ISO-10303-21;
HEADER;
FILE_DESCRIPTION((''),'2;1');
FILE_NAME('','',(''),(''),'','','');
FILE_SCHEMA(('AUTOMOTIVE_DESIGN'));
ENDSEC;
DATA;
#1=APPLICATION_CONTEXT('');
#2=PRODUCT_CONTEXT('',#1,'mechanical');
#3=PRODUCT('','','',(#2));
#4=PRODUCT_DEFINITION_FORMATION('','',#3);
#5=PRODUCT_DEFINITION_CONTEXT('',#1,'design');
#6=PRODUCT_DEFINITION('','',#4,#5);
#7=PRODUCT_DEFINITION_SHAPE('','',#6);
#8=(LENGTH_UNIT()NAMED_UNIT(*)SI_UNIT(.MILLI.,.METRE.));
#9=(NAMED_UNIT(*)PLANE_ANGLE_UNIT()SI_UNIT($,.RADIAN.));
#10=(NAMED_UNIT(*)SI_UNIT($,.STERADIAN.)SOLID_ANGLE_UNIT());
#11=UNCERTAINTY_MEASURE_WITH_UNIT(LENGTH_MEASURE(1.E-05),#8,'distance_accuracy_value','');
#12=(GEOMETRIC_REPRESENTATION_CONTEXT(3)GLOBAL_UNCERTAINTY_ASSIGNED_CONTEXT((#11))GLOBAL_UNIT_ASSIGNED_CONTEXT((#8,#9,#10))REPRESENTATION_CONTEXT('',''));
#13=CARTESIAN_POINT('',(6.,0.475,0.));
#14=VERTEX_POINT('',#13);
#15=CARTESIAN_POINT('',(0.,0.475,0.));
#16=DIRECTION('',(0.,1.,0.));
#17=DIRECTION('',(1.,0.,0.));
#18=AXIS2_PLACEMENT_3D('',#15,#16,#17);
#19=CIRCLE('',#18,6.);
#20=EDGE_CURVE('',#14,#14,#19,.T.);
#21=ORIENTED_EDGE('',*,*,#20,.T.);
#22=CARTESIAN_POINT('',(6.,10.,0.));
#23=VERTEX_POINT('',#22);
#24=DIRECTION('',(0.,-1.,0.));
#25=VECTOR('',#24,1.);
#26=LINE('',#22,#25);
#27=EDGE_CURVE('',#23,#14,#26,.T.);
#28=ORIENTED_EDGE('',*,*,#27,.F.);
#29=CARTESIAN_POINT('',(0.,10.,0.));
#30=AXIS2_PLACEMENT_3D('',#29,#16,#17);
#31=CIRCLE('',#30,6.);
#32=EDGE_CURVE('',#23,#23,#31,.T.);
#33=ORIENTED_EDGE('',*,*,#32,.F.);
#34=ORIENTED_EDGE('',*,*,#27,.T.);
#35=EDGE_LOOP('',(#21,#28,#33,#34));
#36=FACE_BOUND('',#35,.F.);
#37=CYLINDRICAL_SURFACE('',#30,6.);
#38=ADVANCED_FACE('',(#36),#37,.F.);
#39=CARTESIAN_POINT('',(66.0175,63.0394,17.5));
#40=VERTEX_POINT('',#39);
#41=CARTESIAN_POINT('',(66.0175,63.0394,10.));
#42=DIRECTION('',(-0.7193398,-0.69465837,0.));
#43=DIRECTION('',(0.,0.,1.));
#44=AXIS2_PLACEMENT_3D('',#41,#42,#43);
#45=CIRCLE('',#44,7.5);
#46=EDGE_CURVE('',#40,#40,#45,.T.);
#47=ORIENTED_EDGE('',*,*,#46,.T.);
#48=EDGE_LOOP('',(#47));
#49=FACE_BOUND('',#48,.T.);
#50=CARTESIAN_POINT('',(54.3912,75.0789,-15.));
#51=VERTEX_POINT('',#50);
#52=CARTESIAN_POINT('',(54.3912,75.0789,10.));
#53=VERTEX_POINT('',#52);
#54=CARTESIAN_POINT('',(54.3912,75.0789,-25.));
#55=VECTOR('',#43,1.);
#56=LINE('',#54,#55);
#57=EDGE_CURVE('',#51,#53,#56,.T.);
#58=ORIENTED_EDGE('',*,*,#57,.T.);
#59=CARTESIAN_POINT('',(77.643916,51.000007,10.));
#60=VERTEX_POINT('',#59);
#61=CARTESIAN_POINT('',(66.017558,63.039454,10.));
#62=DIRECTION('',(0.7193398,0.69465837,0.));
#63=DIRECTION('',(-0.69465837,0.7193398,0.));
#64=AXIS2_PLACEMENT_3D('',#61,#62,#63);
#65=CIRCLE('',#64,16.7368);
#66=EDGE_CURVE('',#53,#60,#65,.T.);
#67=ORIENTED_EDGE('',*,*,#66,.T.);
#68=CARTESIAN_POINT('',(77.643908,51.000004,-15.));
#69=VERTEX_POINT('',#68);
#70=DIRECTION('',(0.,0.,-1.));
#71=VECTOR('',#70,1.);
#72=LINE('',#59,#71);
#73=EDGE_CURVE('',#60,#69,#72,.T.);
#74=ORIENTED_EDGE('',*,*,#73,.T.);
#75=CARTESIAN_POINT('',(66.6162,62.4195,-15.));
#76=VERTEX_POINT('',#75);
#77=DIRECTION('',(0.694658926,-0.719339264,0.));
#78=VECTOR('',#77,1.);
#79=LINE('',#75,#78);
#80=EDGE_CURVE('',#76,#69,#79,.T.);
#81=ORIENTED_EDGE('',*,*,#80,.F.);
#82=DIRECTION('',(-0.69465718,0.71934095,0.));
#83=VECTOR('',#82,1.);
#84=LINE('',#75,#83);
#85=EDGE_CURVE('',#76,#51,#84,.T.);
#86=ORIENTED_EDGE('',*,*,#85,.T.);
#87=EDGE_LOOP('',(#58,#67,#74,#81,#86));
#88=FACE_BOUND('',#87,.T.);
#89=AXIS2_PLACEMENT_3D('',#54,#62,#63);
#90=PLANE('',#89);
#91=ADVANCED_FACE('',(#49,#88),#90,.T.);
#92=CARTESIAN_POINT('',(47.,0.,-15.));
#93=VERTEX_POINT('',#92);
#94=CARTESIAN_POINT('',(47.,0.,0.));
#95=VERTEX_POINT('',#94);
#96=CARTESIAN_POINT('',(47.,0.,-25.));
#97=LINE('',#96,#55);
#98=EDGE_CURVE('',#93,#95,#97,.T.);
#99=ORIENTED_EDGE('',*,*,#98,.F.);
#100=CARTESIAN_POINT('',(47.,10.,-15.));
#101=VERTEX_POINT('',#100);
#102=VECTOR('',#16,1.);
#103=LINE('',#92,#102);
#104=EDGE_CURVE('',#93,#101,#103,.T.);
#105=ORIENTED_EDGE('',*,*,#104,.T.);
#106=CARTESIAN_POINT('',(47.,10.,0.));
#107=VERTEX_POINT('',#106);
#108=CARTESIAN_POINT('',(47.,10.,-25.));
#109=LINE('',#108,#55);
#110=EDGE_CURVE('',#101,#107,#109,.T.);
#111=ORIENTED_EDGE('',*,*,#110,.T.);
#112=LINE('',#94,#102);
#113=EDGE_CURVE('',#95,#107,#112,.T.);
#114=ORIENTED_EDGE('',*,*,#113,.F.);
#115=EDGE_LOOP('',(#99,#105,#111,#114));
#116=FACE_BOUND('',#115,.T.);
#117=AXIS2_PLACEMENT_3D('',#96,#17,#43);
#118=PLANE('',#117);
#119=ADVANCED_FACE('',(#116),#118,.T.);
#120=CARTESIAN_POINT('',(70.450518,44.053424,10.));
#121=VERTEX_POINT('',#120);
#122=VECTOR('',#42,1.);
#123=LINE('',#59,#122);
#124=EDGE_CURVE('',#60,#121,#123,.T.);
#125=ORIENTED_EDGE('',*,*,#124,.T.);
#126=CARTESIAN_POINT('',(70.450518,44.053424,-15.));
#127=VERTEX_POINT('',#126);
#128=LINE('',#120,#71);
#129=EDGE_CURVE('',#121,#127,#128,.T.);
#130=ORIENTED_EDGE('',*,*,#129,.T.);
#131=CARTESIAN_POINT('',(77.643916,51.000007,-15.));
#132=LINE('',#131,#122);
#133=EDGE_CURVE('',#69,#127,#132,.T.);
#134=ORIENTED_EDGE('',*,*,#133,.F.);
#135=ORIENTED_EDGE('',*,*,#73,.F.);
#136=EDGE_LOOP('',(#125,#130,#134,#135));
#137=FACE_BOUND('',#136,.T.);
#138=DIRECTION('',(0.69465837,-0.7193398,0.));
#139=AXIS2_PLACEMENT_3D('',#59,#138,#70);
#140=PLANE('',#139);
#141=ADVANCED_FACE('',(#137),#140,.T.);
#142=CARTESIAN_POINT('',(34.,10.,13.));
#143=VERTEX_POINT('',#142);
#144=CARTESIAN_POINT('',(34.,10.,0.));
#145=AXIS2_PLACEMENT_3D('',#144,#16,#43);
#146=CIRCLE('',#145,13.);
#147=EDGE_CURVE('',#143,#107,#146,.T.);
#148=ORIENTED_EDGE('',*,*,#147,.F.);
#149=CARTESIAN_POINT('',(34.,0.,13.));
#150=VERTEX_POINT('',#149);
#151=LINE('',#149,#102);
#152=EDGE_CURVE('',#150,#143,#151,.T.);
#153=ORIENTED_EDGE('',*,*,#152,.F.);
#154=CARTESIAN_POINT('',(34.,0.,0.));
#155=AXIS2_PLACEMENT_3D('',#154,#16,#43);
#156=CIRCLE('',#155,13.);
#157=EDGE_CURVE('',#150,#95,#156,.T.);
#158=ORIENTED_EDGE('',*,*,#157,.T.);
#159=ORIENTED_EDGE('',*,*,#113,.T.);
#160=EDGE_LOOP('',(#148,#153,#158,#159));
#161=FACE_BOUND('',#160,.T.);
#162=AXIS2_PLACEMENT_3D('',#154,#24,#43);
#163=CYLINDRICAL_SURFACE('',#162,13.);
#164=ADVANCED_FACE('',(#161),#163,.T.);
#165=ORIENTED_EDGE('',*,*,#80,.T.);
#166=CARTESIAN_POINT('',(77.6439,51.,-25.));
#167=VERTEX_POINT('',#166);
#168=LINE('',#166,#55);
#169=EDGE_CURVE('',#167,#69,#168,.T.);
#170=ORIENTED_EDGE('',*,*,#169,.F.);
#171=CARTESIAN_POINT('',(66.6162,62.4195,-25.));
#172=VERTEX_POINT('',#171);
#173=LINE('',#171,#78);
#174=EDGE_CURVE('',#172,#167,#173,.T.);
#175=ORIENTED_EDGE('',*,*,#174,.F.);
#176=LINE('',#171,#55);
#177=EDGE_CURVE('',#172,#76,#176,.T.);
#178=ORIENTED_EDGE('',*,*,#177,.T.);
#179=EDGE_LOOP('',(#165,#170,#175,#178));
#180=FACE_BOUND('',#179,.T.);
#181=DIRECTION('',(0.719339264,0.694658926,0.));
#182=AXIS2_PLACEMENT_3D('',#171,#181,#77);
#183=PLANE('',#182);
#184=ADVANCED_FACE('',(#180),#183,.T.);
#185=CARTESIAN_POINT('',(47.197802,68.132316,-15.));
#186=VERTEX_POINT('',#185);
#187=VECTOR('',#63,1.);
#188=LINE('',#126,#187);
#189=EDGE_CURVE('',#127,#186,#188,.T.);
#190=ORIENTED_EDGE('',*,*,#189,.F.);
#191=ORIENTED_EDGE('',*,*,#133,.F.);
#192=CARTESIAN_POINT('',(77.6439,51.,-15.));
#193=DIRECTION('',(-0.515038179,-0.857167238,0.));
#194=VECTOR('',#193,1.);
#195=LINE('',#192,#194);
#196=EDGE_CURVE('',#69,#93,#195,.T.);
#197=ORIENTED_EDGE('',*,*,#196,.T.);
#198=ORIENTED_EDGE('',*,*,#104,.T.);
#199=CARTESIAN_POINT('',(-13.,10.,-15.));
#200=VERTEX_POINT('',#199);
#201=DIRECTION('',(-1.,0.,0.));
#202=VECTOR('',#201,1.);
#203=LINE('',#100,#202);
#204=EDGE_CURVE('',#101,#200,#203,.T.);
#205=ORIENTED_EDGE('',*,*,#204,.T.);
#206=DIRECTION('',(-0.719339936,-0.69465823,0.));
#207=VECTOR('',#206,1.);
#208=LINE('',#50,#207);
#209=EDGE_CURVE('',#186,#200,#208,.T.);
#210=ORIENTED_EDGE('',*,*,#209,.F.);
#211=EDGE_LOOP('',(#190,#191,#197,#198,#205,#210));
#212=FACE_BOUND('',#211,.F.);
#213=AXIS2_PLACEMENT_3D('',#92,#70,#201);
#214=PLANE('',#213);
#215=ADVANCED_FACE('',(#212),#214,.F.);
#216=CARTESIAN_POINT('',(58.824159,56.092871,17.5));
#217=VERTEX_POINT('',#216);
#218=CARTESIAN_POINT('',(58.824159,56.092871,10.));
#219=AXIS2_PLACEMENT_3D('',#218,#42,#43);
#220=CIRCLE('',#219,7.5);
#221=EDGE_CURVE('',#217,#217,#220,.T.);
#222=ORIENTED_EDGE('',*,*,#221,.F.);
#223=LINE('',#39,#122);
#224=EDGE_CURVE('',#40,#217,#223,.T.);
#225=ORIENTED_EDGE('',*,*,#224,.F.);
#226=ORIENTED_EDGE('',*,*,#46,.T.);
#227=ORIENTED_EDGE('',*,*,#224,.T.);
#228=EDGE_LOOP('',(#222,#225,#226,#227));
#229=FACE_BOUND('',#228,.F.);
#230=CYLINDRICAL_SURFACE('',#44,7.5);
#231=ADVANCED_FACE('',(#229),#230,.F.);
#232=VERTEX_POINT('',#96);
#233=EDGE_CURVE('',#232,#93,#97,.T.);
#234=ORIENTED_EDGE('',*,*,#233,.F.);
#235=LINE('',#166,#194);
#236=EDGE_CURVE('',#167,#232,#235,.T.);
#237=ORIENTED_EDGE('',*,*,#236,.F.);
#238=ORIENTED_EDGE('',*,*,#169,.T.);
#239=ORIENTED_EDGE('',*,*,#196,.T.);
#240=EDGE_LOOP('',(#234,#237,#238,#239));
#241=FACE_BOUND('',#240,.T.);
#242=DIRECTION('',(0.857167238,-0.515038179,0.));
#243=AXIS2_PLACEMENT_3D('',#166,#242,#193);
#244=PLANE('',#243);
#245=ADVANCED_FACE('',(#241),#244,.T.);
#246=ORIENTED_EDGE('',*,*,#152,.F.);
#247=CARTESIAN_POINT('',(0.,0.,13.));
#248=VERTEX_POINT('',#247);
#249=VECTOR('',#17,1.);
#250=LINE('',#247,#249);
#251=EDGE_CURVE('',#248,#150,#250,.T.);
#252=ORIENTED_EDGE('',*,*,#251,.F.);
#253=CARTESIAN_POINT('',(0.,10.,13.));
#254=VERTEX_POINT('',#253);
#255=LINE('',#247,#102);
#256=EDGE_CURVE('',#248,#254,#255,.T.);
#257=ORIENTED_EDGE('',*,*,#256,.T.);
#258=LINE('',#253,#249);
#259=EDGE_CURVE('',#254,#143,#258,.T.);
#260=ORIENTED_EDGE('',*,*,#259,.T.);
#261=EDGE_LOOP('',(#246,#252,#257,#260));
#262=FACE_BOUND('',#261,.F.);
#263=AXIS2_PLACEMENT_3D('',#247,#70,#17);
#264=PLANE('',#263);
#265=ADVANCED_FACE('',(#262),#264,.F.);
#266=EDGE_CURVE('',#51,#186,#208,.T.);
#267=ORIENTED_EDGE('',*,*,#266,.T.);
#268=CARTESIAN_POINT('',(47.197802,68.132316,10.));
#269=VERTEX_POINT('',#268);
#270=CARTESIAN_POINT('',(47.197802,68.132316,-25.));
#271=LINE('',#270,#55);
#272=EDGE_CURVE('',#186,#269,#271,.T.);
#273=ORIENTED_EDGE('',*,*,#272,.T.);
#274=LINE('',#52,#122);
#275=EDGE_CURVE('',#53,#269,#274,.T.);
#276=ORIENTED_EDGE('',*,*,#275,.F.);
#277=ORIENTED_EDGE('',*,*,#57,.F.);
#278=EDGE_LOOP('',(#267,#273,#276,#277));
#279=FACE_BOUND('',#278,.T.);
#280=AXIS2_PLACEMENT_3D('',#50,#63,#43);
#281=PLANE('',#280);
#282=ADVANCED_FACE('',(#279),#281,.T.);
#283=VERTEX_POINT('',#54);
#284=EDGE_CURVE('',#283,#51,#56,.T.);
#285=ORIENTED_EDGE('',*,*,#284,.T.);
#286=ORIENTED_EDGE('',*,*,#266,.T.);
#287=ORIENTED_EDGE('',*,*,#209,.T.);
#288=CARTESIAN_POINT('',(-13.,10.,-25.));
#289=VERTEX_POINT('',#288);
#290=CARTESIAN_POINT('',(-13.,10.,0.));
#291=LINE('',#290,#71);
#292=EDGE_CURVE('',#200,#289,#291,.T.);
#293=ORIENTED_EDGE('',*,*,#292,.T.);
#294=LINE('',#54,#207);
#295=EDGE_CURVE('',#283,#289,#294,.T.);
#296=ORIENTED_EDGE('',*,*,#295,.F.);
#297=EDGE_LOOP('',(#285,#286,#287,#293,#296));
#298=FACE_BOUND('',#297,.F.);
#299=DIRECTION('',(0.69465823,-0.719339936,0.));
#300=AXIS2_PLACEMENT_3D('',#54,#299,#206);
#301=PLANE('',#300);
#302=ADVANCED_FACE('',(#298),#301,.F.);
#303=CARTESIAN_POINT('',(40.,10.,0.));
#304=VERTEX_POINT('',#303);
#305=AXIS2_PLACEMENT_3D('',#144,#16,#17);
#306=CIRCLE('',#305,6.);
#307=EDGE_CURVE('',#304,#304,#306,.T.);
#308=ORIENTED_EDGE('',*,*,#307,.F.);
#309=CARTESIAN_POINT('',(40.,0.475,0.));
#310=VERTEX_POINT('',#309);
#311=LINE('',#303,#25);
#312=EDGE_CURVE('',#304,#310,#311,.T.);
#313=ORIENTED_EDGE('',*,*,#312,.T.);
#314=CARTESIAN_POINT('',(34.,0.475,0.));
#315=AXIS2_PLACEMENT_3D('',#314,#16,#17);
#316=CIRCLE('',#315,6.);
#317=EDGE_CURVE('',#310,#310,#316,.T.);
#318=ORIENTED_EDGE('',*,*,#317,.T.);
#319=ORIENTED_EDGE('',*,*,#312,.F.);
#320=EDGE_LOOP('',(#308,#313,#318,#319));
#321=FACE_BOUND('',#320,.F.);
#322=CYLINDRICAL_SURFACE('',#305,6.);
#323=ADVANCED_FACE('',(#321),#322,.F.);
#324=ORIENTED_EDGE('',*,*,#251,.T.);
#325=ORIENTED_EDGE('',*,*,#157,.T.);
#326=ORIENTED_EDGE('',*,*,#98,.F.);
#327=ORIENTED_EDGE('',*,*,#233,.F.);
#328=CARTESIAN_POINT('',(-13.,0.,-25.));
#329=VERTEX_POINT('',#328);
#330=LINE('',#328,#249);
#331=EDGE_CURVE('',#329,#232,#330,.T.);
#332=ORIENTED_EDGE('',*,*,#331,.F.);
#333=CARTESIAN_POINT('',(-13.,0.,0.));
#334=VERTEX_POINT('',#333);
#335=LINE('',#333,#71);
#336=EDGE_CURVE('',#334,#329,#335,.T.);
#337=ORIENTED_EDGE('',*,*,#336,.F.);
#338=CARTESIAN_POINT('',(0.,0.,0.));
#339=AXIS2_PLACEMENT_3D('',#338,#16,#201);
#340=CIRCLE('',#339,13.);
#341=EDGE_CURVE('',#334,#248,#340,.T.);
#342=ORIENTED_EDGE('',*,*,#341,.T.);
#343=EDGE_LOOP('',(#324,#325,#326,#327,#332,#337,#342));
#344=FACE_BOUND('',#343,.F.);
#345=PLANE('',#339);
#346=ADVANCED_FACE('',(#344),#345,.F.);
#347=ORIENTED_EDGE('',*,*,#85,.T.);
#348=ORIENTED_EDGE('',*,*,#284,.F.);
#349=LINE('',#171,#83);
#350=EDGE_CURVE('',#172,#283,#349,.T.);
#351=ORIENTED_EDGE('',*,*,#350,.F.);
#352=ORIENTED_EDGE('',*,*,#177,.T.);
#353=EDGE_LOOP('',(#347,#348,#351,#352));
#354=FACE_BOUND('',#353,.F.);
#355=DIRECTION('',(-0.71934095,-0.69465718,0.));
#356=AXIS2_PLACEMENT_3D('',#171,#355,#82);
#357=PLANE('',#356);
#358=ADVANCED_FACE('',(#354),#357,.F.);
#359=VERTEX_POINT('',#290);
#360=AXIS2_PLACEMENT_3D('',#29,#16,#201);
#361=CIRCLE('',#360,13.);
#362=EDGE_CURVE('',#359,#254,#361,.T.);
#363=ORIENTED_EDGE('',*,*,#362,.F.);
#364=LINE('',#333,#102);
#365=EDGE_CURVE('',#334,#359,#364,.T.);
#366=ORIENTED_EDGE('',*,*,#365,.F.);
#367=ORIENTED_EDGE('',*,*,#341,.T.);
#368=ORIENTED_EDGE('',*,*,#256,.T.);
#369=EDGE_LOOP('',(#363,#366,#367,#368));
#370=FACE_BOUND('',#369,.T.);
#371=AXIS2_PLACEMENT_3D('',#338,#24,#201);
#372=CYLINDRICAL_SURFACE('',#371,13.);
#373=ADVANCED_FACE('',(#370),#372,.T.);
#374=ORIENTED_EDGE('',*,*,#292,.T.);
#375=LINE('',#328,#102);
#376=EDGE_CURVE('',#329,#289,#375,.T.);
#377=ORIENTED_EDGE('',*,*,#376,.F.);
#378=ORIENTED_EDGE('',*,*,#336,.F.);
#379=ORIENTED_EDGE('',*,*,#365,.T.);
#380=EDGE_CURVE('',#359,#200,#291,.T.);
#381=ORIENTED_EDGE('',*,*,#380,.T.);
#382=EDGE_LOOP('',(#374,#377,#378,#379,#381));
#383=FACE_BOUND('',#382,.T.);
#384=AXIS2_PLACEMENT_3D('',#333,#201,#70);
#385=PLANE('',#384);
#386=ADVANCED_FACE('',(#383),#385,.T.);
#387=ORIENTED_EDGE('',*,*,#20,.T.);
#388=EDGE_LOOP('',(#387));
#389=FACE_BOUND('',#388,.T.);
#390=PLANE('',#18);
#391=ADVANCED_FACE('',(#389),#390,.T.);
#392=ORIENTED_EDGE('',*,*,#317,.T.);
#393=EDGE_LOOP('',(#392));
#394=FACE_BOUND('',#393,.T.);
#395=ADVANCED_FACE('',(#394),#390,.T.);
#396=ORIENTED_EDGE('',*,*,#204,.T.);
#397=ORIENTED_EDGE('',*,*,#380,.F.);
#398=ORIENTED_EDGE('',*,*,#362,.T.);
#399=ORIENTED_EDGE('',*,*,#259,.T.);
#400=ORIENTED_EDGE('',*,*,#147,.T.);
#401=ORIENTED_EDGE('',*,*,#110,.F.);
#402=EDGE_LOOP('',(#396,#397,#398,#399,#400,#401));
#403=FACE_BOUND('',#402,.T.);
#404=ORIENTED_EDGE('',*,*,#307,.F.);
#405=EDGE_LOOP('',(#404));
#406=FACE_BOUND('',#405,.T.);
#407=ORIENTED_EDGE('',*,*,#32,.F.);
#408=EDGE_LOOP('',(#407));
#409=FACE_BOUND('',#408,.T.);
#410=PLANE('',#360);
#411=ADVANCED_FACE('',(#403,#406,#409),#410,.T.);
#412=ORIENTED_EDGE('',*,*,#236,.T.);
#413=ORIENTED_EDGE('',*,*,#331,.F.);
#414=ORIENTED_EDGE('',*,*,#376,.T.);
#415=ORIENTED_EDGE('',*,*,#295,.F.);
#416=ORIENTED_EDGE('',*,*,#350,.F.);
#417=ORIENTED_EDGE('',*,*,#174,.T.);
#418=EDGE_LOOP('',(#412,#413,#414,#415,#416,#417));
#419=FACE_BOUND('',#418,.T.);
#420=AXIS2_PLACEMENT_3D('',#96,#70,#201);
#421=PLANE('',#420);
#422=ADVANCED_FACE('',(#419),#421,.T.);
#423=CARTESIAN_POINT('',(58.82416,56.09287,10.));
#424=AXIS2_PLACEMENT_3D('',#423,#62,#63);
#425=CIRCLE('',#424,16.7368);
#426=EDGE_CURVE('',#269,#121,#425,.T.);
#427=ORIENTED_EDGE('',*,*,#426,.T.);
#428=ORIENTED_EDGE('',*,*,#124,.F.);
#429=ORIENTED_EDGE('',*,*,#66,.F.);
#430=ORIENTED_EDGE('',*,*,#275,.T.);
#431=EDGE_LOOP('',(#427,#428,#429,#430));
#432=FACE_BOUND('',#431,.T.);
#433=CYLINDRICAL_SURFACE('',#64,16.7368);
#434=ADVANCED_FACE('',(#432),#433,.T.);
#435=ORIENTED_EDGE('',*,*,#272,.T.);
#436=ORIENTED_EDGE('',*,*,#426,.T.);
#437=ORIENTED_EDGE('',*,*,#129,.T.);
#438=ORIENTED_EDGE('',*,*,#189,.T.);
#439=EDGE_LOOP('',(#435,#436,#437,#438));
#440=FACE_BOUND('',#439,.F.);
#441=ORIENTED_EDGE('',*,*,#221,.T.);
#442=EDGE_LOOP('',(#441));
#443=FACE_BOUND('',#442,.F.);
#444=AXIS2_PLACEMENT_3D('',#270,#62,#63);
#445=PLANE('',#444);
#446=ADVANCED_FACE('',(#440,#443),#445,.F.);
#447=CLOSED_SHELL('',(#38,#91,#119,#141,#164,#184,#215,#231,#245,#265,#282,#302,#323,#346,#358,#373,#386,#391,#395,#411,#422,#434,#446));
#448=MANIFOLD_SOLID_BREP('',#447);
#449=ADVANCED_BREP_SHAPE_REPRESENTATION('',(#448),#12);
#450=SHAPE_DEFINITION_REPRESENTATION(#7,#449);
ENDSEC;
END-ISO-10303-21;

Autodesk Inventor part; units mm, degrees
ref_plane "YZ Plane" through (0, 0, 0) normal (1, 0, 0) x (0, 1, 0)
ref_plane "XZ Plane" through (0, 0, 0) normal (0, 1, 0) x (-1, 0, 0)
ref_plane "XY Plane" through (0, 0, 0) normal (0, 0, 1) x (1, 0, 0)
sketch "Sketch1" plane through (0, 0, 0) normal (0, 1, 0) x (-1, 0, 0)
  arc A0 (-34, 13) -> (-47, 0) centre (-34, 0) ccw
  arc A1 (13, 0) -> (0, 13) centre (0, 0) ccw
  line L0 (0, 13) -> (-34, 13)
  line L1 (13, 0) -> (13, -25)
  line L2 (13, -25) -> (-47, -25)
  line L3 (-47, -25) -> (-47, 0)
  dimension "d25" = 60
  dimension "d26" = 13
  dimension "d27" = 13
  dimension "d28" = 25
extrude "Extrusion1" add sketch "Sketch1" along normal blind 10
sketch "Sketch2" plane through (0, 10, 0) normal (0, 1, 0) x (1, 0, 0)
  arc A0 (-13, 0) -> (0, -13) centre (0, 0) ccw projected
  arc A1 (34, -13) -> (47, 0) centre (34, 0) ccw projected
  circle A2 centre (0, 0) radius 6
  circle A3 centre (34, 0) radius 6
  dimension "d29" = 12
extrude "Extrusion2" cut sketch "Sketch2" against normal blind 9.525
sketch "Sketch3" plane through (47, 0, -25) normal (0, 0, -1) x (-1, 0, 0)
  line L0 (0, 10) -> (60, 10) projected
  line L1 (0, 0) -> (0, 10) projected
  line L2 (-19.6162, 62.4195) -> (-7.3912, 75.0789)
  line L3 (-19.6162, 62.4195) -> (-30.6439, 51)
  line L4 (-30.6439, 51) -> (0, 0)
  line L5 (-7.3912, 75.0789) -> (60, 10)
  line L6 (0, 0) -> (0, 10)
  line L7 (60, 10) -> (0, 10)
  point P0 (47, 0)
  dimension "d30" = 44
  dimension "d31" = 90
  dimension "d32" = 51
  dimension "d33" = 105
extrude "Extrusion3" add sketch "Sketch3" against normal blind 10
sketch "Sketch4" plane through (54.3912, 75.0789, -25) normal (0.7193398, 0.6946584, 0) x (-0.6946584, 0.7193398, 0)
  line L0 (0, 0) -> (-33.4736, 0) projected
  line L1 (0, 0) -> (0, 10) projected
  line L2 (-33.4736, 10) -> (0, 10) projected
  line L3 (-33.4736, 0) -> (-33.4736, 10) projected
  arc A0 (0, 35) -> (-33.4736, 35) centre (-16.7368, 35) ccw
  line L4 (-33.4736, 35) -> (-33.4736, 0)
  line L5 (-33.4736, 0) -> (0, 0)
  line L6 (0, 0) -> (0, 35)
  point P0 (-16.224, 25)
  dimension "d34" = 35
extrude "Extrusion4" add sketch "Sketch4" against normal blind 10 contours L2 L4 A0 L6
hole "구멍1" at (66.0175, 63.0394, 10) direction (-0.7193398, -0.6946584, 0) diameter 15 end up to surface
properties part number "스터디캐드캠 - 3D 모델링 연습도면 540"
